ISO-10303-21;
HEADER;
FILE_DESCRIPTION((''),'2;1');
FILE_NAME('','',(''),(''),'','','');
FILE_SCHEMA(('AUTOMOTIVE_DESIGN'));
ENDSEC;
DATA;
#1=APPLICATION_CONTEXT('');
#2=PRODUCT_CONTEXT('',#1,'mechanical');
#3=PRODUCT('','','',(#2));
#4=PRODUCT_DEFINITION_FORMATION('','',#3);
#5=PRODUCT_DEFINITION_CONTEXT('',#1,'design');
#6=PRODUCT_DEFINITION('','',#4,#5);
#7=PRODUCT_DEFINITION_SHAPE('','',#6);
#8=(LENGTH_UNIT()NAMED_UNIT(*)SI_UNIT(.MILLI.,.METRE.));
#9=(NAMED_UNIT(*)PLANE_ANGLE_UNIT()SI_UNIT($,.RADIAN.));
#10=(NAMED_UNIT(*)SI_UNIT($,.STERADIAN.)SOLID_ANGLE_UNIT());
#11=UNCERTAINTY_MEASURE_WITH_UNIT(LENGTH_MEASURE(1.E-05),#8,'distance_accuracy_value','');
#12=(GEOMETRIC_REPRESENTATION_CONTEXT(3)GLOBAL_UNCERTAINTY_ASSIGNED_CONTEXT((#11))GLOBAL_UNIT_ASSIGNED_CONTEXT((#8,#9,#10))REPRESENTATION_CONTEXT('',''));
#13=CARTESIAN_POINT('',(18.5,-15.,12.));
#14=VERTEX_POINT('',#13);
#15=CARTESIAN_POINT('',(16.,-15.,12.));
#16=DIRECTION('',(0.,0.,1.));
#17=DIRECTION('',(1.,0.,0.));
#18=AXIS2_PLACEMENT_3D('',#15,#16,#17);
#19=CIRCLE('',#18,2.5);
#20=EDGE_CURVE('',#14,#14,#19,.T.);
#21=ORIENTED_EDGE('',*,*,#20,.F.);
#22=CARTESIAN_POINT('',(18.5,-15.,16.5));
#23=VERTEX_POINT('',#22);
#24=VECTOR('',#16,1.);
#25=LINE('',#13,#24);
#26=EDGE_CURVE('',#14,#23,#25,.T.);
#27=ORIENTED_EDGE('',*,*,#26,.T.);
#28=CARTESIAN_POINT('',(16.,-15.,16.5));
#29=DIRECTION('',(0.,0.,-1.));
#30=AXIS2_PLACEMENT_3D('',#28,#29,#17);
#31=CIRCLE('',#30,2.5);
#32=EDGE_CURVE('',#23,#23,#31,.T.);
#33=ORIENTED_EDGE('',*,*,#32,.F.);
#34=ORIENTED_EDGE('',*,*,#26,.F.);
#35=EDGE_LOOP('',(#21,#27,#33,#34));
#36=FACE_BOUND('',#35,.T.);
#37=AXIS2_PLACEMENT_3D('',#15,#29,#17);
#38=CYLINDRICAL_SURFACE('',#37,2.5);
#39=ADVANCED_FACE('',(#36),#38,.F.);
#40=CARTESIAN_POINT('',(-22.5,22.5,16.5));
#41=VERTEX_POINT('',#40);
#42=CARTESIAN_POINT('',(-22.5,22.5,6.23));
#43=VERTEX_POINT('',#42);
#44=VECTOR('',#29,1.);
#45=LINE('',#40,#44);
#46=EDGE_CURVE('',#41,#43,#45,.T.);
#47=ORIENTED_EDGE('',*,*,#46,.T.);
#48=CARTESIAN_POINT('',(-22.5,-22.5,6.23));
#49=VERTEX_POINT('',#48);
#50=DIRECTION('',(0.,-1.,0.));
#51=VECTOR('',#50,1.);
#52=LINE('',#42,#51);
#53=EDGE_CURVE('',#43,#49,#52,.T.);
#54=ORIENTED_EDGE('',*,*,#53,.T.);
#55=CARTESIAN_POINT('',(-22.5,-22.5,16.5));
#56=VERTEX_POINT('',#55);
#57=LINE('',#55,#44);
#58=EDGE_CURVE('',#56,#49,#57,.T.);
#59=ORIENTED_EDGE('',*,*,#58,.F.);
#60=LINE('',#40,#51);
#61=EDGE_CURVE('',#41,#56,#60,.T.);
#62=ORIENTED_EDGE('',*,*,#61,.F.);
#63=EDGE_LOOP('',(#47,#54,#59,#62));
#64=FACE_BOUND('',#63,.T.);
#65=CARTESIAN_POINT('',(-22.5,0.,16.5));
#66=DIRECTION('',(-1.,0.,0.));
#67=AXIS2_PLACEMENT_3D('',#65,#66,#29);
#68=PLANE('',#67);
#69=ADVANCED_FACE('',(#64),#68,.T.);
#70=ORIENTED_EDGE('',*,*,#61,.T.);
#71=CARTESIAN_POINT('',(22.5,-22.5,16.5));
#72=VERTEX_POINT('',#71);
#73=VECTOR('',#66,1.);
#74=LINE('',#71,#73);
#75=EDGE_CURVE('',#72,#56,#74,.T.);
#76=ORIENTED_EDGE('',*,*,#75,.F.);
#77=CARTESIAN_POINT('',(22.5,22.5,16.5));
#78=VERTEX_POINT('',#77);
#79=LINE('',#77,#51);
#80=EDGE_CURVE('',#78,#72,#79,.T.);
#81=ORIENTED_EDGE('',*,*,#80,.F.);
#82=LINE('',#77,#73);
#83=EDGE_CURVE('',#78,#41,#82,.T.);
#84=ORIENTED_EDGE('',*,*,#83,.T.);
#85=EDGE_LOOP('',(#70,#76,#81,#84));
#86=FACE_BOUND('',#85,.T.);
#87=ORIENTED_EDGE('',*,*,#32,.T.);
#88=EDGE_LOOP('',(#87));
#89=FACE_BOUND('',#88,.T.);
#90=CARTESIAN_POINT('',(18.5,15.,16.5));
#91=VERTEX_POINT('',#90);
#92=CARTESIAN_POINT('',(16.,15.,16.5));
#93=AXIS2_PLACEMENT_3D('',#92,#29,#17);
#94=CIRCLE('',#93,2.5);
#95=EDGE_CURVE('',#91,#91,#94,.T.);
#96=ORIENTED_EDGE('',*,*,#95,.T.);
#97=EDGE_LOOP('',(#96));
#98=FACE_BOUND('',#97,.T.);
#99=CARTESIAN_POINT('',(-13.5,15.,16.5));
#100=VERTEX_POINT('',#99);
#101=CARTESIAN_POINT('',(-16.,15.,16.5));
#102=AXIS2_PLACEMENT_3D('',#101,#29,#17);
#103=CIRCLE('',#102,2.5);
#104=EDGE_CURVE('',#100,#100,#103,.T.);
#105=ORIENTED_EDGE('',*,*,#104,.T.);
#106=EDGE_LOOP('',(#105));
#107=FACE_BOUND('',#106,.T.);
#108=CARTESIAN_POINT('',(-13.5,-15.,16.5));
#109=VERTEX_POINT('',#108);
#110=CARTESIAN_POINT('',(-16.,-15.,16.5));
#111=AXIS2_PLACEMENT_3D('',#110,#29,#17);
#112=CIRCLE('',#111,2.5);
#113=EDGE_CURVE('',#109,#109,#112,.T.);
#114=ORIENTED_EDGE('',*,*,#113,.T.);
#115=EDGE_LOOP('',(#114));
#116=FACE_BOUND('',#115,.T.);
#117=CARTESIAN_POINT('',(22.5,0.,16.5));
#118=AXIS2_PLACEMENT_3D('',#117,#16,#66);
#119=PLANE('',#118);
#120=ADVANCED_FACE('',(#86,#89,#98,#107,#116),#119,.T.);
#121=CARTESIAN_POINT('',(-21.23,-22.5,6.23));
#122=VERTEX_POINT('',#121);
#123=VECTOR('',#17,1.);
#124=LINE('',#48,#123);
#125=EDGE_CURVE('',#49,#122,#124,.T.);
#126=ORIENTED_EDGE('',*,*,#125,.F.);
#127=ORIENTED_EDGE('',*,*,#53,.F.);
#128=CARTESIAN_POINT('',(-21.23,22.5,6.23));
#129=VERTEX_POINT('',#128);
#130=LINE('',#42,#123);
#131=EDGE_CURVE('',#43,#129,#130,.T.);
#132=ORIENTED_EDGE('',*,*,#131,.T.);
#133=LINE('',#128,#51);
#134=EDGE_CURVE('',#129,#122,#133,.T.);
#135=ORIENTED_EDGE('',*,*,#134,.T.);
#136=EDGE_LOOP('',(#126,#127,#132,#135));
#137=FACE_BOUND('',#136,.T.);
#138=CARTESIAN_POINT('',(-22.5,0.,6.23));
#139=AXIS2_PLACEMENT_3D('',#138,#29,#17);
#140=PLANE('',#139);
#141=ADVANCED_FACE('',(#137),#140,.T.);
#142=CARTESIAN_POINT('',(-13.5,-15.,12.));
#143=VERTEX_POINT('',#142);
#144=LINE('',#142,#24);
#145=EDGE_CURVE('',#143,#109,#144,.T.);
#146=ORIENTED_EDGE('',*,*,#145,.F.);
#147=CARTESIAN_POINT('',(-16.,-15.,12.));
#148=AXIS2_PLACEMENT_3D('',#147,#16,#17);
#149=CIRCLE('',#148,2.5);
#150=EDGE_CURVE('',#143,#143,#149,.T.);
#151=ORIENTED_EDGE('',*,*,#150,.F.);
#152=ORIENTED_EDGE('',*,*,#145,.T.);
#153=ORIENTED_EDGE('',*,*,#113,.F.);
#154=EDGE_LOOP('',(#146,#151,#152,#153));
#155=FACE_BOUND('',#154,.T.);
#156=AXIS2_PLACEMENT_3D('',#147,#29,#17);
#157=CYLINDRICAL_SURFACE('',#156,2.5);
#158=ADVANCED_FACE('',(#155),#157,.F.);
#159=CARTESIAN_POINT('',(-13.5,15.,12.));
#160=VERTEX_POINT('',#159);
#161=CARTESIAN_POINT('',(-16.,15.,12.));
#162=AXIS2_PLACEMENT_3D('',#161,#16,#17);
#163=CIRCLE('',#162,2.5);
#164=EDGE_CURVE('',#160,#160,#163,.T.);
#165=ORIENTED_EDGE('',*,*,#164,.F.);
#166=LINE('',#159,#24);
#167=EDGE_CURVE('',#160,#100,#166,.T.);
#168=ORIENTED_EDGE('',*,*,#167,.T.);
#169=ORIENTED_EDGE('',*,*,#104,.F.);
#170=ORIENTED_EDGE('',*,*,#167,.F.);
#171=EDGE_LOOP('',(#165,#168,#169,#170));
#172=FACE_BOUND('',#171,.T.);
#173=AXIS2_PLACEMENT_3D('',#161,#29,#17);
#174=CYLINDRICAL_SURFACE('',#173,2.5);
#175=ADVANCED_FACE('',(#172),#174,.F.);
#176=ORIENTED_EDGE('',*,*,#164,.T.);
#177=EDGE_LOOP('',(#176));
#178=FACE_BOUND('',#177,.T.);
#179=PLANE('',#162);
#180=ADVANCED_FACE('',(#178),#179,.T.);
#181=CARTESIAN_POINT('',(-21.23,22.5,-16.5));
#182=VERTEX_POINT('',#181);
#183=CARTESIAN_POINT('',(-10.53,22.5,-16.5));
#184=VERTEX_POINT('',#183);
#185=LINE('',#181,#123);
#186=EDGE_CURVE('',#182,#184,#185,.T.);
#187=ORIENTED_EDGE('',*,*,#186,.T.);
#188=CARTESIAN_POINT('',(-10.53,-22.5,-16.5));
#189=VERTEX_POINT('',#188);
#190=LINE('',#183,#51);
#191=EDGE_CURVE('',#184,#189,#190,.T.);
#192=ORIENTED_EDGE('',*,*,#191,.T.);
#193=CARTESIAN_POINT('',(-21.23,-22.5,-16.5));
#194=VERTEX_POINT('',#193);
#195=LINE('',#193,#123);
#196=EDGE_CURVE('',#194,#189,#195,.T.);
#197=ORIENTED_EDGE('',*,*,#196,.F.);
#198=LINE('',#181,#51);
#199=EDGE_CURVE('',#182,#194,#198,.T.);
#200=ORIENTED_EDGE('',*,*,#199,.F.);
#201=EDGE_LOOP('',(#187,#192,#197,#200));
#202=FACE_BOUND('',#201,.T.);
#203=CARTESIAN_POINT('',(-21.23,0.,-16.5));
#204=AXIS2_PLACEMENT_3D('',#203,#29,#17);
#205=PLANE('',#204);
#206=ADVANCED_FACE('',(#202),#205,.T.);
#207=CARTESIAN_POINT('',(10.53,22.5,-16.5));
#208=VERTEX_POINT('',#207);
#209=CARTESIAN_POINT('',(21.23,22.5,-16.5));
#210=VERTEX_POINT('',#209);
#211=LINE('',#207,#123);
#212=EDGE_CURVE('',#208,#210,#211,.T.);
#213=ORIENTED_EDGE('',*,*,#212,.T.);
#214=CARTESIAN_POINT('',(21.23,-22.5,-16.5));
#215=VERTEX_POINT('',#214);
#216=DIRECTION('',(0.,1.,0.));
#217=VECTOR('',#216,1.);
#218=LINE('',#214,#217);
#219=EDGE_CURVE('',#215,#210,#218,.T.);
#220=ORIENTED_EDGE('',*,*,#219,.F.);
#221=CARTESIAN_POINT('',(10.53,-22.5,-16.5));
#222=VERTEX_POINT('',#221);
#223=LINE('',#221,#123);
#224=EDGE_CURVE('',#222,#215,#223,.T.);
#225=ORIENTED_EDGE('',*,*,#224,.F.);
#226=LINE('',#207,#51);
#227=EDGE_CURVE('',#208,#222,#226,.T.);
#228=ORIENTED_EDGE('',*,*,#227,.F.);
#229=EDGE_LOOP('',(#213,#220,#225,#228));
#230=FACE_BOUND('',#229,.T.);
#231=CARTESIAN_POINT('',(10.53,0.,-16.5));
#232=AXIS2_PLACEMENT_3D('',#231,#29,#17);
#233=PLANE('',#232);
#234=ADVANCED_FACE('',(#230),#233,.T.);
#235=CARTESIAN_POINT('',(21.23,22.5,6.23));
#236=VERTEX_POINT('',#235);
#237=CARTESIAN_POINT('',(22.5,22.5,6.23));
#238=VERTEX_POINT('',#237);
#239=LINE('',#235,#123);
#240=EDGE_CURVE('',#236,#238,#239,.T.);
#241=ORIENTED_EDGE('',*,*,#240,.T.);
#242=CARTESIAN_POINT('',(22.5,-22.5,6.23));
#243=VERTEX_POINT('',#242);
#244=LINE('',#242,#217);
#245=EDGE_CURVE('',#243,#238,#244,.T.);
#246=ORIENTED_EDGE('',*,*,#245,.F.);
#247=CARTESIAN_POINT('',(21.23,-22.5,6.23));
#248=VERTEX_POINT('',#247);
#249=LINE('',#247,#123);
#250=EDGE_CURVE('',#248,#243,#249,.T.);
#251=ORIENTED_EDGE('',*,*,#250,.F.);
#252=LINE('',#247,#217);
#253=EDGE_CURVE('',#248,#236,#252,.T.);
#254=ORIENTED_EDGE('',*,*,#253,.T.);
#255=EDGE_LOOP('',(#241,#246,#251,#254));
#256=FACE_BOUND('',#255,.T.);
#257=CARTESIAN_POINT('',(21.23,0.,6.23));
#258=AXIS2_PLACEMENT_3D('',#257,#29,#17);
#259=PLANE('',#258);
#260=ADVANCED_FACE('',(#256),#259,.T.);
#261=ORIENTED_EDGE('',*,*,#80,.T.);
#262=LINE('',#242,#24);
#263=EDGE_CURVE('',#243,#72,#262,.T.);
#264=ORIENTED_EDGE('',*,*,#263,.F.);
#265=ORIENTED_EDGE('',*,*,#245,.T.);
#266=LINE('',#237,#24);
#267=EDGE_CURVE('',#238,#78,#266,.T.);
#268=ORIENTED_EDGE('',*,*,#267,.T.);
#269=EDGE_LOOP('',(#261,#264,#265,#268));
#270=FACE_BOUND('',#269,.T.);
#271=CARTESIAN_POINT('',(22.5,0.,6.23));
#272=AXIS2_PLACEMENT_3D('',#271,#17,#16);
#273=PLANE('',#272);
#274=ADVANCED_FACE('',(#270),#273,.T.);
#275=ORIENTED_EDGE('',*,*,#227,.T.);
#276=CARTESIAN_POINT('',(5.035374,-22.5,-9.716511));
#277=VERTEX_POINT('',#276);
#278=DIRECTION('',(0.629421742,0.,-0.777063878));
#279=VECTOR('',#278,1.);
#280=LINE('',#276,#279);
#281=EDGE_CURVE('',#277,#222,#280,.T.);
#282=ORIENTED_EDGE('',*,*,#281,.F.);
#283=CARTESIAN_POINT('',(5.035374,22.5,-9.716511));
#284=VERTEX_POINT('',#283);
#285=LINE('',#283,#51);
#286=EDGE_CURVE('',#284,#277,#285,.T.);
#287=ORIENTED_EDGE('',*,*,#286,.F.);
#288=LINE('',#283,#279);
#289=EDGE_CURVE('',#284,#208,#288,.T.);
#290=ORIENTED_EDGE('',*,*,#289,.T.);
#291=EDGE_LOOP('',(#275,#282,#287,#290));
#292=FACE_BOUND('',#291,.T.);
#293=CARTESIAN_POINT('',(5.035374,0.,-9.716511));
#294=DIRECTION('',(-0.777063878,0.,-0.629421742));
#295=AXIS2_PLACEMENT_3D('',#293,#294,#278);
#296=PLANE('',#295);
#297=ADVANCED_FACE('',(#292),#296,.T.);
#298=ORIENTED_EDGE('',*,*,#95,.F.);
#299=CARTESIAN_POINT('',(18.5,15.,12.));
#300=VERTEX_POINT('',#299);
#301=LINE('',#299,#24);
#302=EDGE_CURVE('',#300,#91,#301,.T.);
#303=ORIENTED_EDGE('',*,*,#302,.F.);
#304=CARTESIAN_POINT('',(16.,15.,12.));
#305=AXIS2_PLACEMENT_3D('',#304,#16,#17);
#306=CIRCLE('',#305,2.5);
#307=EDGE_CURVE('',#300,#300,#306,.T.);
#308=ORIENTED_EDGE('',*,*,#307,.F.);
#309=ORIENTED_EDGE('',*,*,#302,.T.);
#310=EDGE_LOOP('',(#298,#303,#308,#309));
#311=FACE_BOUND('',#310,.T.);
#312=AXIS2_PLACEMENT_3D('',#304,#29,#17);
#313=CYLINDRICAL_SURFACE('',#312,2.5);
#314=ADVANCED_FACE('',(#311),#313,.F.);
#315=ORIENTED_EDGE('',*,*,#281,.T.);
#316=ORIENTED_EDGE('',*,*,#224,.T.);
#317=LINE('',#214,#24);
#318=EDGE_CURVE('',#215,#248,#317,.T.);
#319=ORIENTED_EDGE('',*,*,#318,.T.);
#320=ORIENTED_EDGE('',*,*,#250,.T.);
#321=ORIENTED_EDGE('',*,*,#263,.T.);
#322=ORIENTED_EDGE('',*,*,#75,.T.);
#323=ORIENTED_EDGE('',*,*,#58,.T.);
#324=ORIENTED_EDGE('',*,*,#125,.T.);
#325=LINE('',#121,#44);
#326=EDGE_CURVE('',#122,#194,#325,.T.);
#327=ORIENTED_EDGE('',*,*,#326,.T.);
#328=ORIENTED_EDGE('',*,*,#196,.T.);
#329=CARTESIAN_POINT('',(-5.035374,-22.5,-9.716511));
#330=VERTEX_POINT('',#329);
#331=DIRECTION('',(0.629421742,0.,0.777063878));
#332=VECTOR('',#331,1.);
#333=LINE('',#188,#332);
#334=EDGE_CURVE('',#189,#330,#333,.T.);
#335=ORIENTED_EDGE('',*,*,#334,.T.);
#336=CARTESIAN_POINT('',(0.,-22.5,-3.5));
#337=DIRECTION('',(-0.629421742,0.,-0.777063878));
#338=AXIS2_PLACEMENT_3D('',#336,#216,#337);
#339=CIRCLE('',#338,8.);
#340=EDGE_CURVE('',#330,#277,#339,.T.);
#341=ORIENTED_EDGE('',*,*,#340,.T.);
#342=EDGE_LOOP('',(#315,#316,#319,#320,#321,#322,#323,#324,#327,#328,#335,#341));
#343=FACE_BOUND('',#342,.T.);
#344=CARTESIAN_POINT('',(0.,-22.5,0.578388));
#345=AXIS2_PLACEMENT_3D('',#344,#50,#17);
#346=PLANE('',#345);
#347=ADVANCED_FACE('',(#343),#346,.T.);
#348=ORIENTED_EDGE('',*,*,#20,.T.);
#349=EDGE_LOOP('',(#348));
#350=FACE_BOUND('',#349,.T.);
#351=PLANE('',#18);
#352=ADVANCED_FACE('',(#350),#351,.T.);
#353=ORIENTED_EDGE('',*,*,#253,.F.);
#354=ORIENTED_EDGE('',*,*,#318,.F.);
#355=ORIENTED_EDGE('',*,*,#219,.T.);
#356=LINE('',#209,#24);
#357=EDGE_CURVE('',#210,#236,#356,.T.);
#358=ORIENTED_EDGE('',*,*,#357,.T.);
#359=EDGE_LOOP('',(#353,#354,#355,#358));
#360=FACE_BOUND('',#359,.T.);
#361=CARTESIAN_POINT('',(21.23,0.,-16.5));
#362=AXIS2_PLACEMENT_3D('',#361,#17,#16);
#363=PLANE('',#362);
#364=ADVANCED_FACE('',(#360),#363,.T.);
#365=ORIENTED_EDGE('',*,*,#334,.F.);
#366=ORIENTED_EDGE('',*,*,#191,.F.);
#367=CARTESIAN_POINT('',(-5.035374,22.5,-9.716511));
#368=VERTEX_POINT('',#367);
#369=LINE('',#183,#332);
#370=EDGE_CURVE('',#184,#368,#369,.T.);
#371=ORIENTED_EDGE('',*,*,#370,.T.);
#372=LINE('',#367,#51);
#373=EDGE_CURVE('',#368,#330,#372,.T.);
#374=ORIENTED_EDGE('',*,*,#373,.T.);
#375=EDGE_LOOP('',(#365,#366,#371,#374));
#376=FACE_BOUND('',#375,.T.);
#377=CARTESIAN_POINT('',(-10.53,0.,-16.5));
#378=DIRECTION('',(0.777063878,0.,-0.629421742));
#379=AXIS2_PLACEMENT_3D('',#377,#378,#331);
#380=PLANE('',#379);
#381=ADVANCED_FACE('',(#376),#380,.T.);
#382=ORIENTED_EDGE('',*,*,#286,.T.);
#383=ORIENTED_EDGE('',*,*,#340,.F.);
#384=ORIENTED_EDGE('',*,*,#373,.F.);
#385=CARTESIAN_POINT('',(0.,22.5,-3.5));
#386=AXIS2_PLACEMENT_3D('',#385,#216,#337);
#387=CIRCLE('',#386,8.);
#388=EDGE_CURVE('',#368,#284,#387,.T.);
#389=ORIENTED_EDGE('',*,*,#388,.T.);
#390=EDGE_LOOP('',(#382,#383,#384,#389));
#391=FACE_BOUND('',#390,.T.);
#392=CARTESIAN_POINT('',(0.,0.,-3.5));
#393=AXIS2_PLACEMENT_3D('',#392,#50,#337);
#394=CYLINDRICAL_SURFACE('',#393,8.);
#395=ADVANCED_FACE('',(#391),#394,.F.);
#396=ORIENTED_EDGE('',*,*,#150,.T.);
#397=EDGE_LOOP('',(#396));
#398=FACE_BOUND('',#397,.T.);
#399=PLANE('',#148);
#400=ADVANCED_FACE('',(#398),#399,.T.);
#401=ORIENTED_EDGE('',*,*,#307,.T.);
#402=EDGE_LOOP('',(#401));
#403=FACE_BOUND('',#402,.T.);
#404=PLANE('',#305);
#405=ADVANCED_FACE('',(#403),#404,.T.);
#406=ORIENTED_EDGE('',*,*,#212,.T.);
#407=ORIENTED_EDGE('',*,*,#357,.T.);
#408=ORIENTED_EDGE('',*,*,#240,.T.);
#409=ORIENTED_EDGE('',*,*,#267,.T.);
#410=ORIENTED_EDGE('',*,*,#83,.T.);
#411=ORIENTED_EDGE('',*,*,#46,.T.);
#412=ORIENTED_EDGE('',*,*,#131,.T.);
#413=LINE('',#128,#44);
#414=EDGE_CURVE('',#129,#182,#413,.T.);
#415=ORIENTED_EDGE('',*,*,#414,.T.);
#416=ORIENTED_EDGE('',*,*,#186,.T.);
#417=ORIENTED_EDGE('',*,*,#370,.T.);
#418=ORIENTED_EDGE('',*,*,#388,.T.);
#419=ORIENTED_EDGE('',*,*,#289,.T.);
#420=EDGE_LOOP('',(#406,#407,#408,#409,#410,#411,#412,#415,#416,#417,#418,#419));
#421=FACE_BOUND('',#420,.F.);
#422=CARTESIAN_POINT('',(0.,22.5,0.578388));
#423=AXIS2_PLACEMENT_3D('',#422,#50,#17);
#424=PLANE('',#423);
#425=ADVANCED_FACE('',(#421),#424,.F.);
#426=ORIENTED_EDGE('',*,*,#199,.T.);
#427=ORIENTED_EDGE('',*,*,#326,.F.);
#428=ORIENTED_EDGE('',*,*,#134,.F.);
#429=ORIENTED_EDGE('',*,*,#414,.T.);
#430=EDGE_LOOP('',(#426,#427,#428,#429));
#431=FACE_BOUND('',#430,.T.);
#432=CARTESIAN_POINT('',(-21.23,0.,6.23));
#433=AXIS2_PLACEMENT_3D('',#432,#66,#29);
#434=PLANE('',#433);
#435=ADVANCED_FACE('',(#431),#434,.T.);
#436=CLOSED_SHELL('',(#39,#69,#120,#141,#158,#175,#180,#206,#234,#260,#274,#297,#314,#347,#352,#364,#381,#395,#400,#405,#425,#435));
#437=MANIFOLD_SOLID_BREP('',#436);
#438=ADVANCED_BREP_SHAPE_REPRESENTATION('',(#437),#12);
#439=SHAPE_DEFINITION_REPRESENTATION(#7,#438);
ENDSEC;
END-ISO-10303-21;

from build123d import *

# Parameters (mm, degrees)
F1_DEPTH = 22.5
F3_START = 12
F2_R     = 2.5
F3_DEPTH = 13


with BuildPart() as f1:
    # F0 (on Front) → F1 (new body, symmetric)
    with BuildSketch(Plane.XZ):
        with BuildLine():
            Line((22.5, 6.23), (22.5, 16.5))
            Line((22.5, 16.5), (-22.5, 16.5))
            Line((-22.5, 16.5), (-22.5, 6.23))
            Line((-22.5, 6.23), (-21.23, 6.23))
            Line((-21.23, 6.23), (-21.23, -16.5))
            Line((-21.23, -16.5), (-10.53, -16.5))
            Line((-10.53, -16.5), (-5.0353739326, -9.7165110278))
            ThreePointArc((-5.0353739326, -9.7165110278), (0, 4.5), (5.0353739326, -9.7165110278))
            Line((5.0353739326, -9.7165110278), (10.53, -16.5))
            Line((10.53, -16.5), (21.23, -16.5))
            Line((21.23, -16.5), (21.23, 6.23))
            Line((21.23, 6.23), (22.5, 6.23))
        make_face()
    extrude(amount=F1_DEPTH, both=True)

    # F2 (on Top) → F3 (cut)
    with BuildSketch(Plane.XY.offset(F3_START)):
        with Locations((-16, 15)):
            Circle(F2_R)
        with Locations((-16, -15)):
            Circle(F2_R)
        with Locations((16, 15)):
            Circle(F2_R)
        with Locations((16, -15)):
            Circle(F2_R)
    extrude(amount=F3_DEPTH, mode=Mode.SUBTRACT)


solid = f1.part
